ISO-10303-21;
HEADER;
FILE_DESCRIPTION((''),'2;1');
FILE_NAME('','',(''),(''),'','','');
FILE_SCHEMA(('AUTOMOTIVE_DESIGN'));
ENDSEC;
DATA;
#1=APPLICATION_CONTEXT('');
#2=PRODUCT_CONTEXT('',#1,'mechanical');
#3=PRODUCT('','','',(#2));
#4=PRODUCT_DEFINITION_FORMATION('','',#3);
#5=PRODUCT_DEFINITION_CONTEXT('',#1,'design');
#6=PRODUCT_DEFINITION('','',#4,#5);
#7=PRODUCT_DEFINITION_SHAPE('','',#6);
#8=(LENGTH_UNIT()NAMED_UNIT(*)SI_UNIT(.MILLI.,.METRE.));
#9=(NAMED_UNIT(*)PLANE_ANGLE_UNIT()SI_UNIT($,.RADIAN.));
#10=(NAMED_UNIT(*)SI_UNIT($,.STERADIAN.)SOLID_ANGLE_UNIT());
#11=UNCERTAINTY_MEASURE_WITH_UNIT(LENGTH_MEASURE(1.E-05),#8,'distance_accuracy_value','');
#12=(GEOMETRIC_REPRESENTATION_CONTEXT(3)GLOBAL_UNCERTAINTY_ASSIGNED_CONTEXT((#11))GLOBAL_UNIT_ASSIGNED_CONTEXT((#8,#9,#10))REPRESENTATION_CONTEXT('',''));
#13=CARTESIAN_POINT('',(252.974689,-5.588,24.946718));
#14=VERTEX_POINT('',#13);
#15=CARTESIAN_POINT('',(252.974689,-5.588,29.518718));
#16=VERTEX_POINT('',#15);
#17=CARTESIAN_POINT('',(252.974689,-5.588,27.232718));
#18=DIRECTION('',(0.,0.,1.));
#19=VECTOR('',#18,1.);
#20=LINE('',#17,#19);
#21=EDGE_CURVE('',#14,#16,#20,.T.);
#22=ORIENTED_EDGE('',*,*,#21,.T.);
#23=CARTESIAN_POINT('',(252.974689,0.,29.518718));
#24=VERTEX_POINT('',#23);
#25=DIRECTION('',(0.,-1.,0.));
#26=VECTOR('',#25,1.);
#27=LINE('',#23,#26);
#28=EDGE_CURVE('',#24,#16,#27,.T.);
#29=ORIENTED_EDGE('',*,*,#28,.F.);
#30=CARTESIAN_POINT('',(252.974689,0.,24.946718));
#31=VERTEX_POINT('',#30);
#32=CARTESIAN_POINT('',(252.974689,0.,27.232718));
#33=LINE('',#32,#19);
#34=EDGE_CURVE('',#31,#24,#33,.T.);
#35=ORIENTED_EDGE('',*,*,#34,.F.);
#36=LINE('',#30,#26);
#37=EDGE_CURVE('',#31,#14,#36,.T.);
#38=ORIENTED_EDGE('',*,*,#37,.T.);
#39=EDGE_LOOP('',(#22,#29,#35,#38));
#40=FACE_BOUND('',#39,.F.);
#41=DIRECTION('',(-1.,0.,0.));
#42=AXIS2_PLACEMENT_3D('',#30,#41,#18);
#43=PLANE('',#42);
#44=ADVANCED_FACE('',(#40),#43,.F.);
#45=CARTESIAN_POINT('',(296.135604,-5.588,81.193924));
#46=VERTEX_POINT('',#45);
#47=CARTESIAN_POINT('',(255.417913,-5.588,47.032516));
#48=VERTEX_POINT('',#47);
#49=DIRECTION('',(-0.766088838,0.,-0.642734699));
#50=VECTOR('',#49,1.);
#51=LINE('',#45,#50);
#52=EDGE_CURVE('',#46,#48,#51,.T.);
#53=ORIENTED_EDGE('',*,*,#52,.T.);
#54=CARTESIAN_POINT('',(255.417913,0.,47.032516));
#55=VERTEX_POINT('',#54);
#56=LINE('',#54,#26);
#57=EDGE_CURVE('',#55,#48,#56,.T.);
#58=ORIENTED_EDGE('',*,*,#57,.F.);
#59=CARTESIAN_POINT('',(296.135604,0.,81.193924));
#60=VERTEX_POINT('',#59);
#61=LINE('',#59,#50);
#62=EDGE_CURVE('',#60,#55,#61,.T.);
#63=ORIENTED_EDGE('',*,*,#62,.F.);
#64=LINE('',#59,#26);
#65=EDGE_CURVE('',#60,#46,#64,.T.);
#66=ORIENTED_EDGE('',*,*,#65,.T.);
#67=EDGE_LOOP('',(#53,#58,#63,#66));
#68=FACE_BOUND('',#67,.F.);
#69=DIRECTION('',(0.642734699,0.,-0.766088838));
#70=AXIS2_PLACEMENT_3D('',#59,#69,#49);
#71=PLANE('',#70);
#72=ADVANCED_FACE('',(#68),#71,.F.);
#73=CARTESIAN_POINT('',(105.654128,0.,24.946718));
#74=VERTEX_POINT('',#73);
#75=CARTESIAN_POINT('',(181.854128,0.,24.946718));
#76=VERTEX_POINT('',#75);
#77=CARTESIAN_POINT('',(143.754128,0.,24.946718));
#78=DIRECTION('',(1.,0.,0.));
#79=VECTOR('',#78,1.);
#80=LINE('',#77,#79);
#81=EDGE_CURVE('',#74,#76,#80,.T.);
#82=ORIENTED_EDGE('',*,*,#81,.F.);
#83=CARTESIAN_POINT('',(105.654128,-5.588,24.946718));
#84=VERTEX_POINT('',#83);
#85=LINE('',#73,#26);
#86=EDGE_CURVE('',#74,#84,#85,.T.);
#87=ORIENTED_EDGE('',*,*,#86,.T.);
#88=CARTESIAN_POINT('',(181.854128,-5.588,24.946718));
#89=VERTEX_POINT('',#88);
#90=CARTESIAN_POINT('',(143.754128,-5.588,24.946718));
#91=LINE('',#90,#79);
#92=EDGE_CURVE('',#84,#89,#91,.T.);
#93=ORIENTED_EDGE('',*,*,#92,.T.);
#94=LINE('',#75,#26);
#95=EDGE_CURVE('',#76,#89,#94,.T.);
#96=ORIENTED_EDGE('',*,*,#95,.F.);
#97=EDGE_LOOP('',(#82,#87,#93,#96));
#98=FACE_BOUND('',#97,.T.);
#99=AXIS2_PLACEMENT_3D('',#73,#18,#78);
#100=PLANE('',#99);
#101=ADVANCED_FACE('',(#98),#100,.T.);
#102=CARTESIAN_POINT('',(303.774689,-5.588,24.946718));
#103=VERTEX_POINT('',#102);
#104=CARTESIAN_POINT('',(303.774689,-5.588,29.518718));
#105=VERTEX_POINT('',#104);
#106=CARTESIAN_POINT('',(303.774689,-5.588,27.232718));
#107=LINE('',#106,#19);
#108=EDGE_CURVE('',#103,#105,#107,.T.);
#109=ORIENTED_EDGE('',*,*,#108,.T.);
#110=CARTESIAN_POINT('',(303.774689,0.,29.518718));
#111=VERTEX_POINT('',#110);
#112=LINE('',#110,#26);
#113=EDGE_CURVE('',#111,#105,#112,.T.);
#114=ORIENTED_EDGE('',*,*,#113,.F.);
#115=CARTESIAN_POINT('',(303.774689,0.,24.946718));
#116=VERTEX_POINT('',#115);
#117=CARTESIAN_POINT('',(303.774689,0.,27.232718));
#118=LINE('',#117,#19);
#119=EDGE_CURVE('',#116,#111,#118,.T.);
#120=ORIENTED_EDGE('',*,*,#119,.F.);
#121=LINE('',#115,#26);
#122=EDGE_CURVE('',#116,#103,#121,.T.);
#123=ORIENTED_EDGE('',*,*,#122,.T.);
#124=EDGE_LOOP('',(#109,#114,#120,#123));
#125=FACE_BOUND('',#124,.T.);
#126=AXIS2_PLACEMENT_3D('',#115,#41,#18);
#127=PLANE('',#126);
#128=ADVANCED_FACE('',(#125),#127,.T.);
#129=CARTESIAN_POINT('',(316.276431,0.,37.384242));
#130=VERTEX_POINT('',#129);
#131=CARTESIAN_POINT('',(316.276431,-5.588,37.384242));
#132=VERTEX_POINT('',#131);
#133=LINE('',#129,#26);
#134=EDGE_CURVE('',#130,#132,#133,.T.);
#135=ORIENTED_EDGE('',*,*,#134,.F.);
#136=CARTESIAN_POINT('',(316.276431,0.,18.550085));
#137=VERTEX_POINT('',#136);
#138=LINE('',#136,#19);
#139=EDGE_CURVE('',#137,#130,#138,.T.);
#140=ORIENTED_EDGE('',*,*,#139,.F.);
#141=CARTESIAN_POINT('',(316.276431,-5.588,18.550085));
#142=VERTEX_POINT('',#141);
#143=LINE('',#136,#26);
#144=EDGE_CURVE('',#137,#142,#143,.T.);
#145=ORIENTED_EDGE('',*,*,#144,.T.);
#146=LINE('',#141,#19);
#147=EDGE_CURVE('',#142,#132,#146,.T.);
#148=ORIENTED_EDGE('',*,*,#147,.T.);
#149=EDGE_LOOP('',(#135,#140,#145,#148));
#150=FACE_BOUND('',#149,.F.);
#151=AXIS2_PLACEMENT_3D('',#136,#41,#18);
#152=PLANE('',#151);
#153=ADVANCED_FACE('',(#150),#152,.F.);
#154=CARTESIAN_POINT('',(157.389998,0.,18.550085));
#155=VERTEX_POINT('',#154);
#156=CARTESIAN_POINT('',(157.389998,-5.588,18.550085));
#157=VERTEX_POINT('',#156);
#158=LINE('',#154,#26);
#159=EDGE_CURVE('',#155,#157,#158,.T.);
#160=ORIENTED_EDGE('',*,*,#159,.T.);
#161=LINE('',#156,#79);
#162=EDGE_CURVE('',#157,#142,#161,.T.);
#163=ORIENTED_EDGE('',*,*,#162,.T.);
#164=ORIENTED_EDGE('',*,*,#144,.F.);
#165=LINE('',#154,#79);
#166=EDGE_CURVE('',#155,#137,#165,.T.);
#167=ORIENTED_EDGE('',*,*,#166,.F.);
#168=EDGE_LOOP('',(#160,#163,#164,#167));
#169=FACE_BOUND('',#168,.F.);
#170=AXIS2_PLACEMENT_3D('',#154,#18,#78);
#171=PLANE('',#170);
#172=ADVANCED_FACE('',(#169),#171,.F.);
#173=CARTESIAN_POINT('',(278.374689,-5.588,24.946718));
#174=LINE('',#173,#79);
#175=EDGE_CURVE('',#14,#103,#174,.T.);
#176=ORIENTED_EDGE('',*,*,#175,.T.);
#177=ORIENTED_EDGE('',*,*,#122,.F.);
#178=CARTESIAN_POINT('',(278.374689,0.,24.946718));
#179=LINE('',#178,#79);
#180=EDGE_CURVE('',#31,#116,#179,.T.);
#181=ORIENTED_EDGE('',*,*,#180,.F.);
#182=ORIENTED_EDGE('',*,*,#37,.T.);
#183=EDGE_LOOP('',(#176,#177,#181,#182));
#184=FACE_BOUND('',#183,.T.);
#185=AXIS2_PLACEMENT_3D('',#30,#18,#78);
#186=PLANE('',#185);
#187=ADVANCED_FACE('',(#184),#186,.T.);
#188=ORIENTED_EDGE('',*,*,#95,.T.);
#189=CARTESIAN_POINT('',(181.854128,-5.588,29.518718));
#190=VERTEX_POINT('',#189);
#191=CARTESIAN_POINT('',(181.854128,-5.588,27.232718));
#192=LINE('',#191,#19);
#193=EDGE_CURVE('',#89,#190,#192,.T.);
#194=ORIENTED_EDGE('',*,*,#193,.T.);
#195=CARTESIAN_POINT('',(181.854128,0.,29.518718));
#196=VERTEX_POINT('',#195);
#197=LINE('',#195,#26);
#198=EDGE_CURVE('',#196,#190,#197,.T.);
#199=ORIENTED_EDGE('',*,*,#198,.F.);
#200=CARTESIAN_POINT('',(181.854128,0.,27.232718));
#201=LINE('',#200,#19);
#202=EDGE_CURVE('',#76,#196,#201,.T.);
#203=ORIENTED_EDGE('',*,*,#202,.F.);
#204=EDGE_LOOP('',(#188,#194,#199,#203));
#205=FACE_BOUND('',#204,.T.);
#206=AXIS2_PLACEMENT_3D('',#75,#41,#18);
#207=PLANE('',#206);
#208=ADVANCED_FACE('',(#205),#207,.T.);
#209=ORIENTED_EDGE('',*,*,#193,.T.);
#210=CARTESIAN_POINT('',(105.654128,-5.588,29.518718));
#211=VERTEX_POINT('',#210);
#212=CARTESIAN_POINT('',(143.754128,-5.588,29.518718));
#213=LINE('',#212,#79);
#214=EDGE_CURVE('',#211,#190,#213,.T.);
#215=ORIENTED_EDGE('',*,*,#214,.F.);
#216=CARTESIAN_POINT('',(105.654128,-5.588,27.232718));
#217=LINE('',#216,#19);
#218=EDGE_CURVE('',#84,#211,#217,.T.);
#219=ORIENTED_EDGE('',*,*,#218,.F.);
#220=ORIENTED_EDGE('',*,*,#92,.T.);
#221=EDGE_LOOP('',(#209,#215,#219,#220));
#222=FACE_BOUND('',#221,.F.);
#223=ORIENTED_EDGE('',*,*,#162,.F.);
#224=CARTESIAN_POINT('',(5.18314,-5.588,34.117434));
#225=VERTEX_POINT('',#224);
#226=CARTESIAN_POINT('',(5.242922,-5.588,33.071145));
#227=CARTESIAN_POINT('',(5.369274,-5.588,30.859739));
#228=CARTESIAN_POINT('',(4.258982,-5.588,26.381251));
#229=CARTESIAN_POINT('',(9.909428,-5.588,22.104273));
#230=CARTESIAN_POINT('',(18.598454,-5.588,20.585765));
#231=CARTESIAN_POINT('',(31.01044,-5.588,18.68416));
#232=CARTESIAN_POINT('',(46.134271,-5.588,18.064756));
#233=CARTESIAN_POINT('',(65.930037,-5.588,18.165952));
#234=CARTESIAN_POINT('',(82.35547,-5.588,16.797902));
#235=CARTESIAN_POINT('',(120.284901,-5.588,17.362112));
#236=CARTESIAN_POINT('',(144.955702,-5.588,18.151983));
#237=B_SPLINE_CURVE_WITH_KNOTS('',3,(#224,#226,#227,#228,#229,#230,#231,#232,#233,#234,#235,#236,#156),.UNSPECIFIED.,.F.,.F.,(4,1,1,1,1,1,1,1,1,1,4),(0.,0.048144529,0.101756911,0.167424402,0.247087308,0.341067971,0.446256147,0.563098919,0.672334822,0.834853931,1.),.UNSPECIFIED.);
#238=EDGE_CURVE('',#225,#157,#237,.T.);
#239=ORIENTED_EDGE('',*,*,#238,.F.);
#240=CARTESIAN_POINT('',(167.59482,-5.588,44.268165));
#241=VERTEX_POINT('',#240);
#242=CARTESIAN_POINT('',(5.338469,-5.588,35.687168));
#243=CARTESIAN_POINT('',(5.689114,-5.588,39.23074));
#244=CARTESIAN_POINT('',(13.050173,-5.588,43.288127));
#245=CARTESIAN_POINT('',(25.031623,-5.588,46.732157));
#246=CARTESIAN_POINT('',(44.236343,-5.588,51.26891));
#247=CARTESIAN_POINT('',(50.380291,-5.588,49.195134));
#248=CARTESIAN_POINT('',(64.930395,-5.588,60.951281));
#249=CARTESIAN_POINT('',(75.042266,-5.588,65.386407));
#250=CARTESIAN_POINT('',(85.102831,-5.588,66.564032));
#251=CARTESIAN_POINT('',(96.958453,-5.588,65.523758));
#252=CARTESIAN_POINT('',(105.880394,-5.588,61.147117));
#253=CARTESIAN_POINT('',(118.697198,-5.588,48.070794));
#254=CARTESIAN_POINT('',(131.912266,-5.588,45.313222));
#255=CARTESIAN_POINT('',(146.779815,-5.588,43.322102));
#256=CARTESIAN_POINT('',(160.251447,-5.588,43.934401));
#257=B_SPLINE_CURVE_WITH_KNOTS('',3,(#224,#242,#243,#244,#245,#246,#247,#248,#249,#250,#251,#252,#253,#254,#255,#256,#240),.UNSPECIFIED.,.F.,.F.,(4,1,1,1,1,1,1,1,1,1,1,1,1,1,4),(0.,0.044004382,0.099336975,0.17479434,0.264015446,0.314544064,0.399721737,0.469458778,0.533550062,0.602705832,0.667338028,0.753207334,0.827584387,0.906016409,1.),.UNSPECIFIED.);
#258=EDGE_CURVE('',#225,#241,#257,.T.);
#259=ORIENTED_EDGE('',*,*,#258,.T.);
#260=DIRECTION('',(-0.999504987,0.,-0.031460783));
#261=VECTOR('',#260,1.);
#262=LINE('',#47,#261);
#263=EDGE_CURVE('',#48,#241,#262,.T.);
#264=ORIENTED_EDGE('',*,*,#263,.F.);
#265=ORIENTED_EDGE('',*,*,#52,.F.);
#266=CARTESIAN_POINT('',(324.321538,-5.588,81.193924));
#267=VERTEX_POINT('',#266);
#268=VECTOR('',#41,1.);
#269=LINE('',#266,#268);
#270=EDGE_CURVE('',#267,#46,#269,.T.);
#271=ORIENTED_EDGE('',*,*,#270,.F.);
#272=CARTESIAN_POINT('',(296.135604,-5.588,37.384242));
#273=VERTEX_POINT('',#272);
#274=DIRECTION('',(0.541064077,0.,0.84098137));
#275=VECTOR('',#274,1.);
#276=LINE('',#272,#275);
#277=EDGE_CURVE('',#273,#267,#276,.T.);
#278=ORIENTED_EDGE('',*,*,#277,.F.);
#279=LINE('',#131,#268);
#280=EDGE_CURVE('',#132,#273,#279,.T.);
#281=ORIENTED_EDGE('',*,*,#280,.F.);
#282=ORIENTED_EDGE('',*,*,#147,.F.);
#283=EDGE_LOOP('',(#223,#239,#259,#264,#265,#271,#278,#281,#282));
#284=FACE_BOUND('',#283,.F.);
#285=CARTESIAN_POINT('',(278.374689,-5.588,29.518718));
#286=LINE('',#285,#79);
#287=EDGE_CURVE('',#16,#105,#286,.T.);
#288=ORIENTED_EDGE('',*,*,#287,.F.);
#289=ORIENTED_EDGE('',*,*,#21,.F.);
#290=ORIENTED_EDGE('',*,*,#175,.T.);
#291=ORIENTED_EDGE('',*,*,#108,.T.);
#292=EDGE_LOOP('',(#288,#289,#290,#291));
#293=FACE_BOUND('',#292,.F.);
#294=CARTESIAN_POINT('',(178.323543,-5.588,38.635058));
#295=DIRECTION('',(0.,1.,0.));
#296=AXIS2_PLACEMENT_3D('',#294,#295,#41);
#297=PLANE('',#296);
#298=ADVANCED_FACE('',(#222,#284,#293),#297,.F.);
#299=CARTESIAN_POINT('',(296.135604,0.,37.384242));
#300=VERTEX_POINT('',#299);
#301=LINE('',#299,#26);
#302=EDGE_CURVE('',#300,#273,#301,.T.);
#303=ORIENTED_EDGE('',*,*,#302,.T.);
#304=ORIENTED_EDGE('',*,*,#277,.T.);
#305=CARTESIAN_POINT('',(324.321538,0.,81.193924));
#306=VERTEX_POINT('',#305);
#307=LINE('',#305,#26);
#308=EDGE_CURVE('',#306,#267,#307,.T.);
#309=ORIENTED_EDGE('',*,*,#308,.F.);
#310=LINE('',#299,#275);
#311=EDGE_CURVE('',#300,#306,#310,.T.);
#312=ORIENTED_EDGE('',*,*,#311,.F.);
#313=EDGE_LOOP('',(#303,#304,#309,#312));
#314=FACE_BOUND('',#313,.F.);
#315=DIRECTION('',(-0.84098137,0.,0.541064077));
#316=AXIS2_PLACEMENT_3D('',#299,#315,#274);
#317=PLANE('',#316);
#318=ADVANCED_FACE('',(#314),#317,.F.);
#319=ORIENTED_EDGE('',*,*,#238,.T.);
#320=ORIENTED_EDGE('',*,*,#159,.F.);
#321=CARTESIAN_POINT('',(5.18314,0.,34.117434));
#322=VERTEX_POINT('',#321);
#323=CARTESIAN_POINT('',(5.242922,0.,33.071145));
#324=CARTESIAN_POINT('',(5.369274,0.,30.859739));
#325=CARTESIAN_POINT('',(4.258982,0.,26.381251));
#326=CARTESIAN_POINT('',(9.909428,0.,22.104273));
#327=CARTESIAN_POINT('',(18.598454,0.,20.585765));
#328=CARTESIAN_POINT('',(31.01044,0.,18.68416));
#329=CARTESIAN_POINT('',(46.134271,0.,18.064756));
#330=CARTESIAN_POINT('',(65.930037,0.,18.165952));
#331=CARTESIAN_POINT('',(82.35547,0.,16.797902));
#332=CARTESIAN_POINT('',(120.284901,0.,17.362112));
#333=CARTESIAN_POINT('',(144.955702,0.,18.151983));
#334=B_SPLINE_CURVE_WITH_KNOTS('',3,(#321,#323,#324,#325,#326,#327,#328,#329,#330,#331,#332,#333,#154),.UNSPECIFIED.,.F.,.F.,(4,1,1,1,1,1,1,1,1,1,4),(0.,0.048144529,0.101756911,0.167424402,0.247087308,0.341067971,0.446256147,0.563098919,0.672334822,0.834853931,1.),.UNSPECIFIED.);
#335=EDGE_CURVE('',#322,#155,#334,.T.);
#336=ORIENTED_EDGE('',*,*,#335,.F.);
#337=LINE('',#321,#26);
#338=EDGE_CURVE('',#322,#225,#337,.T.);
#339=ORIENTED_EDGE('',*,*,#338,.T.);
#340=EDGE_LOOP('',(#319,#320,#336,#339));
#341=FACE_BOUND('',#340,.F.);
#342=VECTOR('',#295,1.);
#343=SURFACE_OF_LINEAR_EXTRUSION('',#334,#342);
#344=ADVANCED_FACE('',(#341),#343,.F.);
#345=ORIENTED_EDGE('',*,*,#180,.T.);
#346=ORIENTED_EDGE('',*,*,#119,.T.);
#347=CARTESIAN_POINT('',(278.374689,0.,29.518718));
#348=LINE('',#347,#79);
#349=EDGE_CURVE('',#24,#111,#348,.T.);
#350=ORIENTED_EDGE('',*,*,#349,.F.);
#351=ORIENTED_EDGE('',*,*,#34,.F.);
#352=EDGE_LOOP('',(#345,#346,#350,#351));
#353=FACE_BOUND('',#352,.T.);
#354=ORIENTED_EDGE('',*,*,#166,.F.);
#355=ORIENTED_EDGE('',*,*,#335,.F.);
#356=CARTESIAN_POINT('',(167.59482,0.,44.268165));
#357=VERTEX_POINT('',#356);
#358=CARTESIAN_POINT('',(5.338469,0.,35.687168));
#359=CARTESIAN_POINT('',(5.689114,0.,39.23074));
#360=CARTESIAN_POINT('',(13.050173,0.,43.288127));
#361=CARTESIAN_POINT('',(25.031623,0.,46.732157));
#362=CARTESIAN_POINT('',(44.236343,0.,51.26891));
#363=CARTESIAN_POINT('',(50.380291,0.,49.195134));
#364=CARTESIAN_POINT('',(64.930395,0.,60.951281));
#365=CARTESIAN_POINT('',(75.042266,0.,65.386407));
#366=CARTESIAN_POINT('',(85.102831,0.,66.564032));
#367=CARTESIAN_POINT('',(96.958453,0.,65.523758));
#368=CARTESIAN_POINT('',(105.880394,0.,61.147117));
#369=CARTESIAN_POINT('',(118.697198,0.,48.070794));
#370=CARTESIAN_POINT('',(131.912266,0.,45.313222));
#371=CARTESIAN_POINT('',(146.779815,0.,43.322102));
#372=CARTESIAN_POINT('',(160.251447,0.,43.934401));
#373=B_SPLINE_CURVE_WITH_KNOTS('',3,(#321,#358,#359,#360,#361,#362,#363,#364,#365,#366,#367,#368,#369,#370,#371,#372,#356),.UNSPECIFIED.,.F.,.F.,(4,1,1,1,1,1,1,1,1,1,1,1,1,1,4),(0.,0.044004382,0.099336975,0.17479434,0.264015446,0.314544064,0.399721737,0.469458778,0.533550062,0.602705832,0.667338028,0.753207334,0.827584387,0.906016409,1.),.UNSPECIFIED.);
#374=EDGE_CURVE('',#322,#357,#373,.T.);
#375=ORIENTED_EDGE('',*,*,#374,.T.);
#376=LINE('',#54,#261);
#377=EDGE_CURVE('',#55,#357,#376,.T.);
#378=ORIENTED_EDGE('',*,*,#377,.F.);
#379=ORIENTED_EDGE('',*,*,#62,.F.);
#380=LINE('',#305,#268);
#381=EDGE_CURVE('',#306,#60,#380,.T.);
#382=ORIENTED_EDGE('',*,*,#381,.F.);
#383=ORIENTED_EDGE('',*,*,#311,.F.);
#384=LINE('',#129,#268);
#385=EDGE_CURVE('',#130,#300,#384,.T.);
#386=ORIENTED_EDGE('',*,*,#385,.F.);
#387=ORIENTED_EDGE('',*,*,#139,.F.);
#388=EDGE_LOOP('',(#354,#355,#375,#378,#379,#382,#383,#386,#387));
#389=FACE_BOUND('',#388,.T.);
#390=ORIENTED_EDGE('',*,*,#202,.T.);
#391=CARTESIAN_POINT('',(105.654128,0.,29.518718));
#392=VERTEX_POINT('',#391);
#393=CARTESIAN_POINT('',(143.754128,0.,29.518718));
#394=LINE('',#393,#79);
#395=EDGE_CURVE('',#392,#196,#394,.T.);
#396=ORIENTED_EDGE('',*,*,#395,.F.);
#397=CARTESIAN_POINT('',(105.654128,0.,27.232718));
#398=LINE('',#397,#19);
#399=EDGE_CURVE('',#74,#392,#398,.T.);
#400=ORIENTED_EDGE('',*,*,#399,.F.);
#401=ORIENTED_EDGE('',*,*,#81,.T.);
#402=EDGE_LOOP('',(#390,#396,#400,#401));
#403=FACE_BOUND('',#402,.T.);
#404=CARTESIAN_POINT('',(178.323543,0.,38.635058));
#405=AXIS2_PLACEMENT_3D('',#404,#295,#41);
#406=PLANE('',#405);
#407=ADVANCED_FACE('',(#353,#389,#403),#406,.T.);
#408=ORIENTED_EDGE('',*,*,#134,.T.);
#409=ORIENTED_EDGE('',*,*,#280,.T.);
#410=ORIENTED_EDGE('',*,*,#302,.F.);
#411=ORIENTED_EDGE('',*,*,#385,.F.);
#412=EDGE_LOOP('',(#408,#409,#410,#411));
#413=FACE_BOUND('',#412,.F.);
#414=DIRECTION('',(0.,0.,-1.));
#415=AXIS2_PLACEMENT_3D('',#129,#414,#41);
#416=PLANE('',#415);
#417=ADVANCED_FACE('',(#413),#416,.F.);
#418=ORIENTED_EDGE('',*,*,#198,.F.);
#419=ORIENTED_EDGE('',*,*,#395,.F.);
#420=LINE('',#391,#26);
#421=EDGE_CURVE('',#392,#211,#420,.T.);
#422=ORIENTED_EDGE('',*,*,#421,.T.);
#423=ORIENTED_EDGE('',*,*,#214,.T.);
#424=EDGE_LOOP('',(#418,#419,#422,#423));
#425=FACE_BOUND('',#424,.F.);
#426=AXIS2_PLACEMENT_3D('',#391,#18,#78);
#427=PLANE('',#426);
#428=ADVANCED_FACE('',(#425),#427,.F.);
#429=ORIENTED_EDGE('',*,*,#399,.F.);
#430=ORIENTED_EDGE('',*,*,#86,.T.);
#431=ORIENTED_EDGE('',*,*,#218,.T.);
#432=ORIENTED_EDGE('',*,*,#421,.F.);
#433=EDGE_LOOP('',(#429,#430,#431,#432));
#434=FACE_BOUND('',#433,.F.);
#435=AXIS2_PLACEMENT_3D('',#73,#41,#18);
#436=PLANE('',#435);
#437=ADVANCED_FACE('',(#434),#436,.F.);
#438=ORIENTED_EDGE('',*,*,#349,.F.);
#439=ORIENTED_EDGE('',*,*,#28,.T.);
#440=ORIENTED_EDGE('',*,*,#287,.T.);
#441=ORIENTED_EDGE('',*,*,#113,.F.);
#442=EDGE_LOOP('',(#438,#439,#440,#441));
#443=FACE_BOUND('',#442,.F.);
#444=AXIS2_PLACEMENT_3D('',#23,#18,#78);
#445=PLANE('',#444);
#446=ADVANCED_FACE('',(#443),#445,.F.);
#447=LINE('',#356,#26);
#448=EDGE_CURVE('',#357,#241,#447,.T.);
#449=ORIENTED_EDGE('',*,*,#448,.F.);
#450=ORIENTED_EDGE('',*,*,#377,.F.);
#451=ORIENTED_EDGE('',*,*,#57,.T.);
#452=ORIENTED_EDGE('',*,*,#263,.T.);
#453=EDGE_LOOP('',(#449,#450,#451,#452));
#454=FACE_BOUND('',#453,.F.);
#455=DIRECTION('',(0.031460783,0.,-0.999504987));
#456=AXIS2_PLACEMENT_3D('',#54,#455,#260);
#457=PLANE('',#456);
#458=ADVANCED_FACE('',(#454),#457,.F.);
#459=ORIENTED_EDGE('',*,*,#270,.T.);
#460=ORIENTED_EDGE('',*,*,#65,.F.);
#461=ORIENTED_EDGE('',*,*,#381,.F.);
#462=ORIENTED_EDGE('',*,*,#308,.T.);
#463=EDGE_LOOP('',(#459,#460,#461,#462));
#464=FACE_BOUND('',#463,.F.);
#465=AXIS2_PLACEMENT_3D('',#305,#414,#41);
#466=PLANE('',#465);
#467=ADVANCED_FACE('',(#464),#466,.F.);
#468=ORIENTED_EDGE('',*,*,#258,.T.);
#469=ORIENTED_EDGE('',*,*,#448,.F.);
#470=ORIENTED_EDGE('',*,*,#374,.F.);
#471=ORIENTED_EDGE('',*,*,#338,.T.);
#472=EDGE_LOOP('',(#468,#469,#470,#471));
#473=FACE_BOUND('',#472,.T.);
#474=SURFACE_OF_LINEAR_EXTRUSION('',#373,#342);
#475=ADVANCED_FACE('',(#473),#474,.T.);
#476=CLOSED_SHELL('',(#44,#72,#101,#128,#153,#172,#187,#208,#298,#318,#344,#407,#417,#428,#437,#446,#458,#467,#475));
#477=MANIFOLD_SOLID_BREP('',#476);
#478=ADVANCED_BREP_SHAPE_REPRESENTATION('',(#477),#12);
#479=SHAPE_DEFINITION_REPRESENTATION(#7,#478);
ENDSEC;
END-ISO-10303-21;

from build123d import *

# Parameters (mm, degrees)
F0_W     = 76.2
F0_H     = 4.572
F0_W_2   = 50.8
F1_DEPTH = 5.588


with BuildPart() as f1:
    # F0 (on Front) → F1 (new body)
    with BuildSketch(Plane.XZ):
        with BuildLine():
            add(Edge.make_bspline(
                [(5.1831402816, 34.1174341738), (5.3384693548, 35.6871684741), (5.6891144403, 39.2307395946), (13.0501725287, 43.2881274426), (25.0316226376, 46.7321573297), (44.2363434166, 51.2689101035), (50.3802908007, 49.1951338229), (64.9303946793, 60.9512807395), (75.0422661497, 65.3864074535), (85.1028309036, 66.5640317959), (96.9584527395, 65.5237584095), (105.8803939506, 61.147117083), (118.6971984759, 48.0707941944), (131.9122664086, 45.3132218555), (146.7798154171, 43.322102422), (160.2514465699, 43.9344012555), (167.594820261, 44.2681647837)],
                knots=[0, 0, 0, 0, 0.0440043821, 0.0993369754, 0.1747943401, 0.2640154465, 0.3145440637, 0.3997217371, 0.4694587784, 0.5335500622, 0.6027058317, 0.6673380282, 0.7532073344, 0.8275843868, 0.9060164086, 1, 1, 1, 1], degree=3))
            add(Edge.make_bspline(
                [(5.1831402816, 34.1174341738), (5.2429216667, 33.0711454398), (5.3692739062, 30.859739255), (4.2589819802, 26.3812506128), (9.9094275754, 22.104272954), (18.5984539101, 20.5857647973), (31.010439708, 18.6841603181), (46.1342712862, 18.0647561335), (65.9300368986, 18.1659522123), (82.3554701732, 16.797902378), (120.284901018, 17.3621123501), (144.9557022783, 18.1519831985), (157.389998436, 18.5500849038)],
                knots=[0, 0, 0, 0, 0.0481445289, 0.1017569105, 0.1674244019, 0.2470873084, 0.3410679714, 0.446256147, 0.563098919, 0.6723348225, 0.8348539306, 1, 1, 1, 1], degree=3))
            Line((157.389998436, 18.5500849038), (316.2764310837, 18.5500849038))
            Line((316.2764310837, 18.5500849038), (316.2764310837, 37.3842418194))
            Line((316.2764310837, 37.3842418194), (296.1356043816, 37.3842418194))
            Line((296.1356043816, 37.3842418194), (324.3215382099, 81.1939239502))
            Line((324.3215382099, 81.1939239502), (296.1356043816, 81.1939239502))
            Line((296.1356043816, 81.1939239502), (255.4179131985, 47.0325164497))
            Line((255.4179131985, 47.0325164497), (167.594820261, 44.2681647837))
        make_face()
        with Locations((143.7541278958, 27.2327175454)):
            Rectangle(F0_W, F0_H, mode=Mode.SUBTRACT)
        with Locations((278.3746890068, 27.2327175454)):
            Rectangle(F0_W_2, F0_H, mode=Mode.SUBTRACT)
    extrude(amount=F1_DEPTH)


solid = f1.part
